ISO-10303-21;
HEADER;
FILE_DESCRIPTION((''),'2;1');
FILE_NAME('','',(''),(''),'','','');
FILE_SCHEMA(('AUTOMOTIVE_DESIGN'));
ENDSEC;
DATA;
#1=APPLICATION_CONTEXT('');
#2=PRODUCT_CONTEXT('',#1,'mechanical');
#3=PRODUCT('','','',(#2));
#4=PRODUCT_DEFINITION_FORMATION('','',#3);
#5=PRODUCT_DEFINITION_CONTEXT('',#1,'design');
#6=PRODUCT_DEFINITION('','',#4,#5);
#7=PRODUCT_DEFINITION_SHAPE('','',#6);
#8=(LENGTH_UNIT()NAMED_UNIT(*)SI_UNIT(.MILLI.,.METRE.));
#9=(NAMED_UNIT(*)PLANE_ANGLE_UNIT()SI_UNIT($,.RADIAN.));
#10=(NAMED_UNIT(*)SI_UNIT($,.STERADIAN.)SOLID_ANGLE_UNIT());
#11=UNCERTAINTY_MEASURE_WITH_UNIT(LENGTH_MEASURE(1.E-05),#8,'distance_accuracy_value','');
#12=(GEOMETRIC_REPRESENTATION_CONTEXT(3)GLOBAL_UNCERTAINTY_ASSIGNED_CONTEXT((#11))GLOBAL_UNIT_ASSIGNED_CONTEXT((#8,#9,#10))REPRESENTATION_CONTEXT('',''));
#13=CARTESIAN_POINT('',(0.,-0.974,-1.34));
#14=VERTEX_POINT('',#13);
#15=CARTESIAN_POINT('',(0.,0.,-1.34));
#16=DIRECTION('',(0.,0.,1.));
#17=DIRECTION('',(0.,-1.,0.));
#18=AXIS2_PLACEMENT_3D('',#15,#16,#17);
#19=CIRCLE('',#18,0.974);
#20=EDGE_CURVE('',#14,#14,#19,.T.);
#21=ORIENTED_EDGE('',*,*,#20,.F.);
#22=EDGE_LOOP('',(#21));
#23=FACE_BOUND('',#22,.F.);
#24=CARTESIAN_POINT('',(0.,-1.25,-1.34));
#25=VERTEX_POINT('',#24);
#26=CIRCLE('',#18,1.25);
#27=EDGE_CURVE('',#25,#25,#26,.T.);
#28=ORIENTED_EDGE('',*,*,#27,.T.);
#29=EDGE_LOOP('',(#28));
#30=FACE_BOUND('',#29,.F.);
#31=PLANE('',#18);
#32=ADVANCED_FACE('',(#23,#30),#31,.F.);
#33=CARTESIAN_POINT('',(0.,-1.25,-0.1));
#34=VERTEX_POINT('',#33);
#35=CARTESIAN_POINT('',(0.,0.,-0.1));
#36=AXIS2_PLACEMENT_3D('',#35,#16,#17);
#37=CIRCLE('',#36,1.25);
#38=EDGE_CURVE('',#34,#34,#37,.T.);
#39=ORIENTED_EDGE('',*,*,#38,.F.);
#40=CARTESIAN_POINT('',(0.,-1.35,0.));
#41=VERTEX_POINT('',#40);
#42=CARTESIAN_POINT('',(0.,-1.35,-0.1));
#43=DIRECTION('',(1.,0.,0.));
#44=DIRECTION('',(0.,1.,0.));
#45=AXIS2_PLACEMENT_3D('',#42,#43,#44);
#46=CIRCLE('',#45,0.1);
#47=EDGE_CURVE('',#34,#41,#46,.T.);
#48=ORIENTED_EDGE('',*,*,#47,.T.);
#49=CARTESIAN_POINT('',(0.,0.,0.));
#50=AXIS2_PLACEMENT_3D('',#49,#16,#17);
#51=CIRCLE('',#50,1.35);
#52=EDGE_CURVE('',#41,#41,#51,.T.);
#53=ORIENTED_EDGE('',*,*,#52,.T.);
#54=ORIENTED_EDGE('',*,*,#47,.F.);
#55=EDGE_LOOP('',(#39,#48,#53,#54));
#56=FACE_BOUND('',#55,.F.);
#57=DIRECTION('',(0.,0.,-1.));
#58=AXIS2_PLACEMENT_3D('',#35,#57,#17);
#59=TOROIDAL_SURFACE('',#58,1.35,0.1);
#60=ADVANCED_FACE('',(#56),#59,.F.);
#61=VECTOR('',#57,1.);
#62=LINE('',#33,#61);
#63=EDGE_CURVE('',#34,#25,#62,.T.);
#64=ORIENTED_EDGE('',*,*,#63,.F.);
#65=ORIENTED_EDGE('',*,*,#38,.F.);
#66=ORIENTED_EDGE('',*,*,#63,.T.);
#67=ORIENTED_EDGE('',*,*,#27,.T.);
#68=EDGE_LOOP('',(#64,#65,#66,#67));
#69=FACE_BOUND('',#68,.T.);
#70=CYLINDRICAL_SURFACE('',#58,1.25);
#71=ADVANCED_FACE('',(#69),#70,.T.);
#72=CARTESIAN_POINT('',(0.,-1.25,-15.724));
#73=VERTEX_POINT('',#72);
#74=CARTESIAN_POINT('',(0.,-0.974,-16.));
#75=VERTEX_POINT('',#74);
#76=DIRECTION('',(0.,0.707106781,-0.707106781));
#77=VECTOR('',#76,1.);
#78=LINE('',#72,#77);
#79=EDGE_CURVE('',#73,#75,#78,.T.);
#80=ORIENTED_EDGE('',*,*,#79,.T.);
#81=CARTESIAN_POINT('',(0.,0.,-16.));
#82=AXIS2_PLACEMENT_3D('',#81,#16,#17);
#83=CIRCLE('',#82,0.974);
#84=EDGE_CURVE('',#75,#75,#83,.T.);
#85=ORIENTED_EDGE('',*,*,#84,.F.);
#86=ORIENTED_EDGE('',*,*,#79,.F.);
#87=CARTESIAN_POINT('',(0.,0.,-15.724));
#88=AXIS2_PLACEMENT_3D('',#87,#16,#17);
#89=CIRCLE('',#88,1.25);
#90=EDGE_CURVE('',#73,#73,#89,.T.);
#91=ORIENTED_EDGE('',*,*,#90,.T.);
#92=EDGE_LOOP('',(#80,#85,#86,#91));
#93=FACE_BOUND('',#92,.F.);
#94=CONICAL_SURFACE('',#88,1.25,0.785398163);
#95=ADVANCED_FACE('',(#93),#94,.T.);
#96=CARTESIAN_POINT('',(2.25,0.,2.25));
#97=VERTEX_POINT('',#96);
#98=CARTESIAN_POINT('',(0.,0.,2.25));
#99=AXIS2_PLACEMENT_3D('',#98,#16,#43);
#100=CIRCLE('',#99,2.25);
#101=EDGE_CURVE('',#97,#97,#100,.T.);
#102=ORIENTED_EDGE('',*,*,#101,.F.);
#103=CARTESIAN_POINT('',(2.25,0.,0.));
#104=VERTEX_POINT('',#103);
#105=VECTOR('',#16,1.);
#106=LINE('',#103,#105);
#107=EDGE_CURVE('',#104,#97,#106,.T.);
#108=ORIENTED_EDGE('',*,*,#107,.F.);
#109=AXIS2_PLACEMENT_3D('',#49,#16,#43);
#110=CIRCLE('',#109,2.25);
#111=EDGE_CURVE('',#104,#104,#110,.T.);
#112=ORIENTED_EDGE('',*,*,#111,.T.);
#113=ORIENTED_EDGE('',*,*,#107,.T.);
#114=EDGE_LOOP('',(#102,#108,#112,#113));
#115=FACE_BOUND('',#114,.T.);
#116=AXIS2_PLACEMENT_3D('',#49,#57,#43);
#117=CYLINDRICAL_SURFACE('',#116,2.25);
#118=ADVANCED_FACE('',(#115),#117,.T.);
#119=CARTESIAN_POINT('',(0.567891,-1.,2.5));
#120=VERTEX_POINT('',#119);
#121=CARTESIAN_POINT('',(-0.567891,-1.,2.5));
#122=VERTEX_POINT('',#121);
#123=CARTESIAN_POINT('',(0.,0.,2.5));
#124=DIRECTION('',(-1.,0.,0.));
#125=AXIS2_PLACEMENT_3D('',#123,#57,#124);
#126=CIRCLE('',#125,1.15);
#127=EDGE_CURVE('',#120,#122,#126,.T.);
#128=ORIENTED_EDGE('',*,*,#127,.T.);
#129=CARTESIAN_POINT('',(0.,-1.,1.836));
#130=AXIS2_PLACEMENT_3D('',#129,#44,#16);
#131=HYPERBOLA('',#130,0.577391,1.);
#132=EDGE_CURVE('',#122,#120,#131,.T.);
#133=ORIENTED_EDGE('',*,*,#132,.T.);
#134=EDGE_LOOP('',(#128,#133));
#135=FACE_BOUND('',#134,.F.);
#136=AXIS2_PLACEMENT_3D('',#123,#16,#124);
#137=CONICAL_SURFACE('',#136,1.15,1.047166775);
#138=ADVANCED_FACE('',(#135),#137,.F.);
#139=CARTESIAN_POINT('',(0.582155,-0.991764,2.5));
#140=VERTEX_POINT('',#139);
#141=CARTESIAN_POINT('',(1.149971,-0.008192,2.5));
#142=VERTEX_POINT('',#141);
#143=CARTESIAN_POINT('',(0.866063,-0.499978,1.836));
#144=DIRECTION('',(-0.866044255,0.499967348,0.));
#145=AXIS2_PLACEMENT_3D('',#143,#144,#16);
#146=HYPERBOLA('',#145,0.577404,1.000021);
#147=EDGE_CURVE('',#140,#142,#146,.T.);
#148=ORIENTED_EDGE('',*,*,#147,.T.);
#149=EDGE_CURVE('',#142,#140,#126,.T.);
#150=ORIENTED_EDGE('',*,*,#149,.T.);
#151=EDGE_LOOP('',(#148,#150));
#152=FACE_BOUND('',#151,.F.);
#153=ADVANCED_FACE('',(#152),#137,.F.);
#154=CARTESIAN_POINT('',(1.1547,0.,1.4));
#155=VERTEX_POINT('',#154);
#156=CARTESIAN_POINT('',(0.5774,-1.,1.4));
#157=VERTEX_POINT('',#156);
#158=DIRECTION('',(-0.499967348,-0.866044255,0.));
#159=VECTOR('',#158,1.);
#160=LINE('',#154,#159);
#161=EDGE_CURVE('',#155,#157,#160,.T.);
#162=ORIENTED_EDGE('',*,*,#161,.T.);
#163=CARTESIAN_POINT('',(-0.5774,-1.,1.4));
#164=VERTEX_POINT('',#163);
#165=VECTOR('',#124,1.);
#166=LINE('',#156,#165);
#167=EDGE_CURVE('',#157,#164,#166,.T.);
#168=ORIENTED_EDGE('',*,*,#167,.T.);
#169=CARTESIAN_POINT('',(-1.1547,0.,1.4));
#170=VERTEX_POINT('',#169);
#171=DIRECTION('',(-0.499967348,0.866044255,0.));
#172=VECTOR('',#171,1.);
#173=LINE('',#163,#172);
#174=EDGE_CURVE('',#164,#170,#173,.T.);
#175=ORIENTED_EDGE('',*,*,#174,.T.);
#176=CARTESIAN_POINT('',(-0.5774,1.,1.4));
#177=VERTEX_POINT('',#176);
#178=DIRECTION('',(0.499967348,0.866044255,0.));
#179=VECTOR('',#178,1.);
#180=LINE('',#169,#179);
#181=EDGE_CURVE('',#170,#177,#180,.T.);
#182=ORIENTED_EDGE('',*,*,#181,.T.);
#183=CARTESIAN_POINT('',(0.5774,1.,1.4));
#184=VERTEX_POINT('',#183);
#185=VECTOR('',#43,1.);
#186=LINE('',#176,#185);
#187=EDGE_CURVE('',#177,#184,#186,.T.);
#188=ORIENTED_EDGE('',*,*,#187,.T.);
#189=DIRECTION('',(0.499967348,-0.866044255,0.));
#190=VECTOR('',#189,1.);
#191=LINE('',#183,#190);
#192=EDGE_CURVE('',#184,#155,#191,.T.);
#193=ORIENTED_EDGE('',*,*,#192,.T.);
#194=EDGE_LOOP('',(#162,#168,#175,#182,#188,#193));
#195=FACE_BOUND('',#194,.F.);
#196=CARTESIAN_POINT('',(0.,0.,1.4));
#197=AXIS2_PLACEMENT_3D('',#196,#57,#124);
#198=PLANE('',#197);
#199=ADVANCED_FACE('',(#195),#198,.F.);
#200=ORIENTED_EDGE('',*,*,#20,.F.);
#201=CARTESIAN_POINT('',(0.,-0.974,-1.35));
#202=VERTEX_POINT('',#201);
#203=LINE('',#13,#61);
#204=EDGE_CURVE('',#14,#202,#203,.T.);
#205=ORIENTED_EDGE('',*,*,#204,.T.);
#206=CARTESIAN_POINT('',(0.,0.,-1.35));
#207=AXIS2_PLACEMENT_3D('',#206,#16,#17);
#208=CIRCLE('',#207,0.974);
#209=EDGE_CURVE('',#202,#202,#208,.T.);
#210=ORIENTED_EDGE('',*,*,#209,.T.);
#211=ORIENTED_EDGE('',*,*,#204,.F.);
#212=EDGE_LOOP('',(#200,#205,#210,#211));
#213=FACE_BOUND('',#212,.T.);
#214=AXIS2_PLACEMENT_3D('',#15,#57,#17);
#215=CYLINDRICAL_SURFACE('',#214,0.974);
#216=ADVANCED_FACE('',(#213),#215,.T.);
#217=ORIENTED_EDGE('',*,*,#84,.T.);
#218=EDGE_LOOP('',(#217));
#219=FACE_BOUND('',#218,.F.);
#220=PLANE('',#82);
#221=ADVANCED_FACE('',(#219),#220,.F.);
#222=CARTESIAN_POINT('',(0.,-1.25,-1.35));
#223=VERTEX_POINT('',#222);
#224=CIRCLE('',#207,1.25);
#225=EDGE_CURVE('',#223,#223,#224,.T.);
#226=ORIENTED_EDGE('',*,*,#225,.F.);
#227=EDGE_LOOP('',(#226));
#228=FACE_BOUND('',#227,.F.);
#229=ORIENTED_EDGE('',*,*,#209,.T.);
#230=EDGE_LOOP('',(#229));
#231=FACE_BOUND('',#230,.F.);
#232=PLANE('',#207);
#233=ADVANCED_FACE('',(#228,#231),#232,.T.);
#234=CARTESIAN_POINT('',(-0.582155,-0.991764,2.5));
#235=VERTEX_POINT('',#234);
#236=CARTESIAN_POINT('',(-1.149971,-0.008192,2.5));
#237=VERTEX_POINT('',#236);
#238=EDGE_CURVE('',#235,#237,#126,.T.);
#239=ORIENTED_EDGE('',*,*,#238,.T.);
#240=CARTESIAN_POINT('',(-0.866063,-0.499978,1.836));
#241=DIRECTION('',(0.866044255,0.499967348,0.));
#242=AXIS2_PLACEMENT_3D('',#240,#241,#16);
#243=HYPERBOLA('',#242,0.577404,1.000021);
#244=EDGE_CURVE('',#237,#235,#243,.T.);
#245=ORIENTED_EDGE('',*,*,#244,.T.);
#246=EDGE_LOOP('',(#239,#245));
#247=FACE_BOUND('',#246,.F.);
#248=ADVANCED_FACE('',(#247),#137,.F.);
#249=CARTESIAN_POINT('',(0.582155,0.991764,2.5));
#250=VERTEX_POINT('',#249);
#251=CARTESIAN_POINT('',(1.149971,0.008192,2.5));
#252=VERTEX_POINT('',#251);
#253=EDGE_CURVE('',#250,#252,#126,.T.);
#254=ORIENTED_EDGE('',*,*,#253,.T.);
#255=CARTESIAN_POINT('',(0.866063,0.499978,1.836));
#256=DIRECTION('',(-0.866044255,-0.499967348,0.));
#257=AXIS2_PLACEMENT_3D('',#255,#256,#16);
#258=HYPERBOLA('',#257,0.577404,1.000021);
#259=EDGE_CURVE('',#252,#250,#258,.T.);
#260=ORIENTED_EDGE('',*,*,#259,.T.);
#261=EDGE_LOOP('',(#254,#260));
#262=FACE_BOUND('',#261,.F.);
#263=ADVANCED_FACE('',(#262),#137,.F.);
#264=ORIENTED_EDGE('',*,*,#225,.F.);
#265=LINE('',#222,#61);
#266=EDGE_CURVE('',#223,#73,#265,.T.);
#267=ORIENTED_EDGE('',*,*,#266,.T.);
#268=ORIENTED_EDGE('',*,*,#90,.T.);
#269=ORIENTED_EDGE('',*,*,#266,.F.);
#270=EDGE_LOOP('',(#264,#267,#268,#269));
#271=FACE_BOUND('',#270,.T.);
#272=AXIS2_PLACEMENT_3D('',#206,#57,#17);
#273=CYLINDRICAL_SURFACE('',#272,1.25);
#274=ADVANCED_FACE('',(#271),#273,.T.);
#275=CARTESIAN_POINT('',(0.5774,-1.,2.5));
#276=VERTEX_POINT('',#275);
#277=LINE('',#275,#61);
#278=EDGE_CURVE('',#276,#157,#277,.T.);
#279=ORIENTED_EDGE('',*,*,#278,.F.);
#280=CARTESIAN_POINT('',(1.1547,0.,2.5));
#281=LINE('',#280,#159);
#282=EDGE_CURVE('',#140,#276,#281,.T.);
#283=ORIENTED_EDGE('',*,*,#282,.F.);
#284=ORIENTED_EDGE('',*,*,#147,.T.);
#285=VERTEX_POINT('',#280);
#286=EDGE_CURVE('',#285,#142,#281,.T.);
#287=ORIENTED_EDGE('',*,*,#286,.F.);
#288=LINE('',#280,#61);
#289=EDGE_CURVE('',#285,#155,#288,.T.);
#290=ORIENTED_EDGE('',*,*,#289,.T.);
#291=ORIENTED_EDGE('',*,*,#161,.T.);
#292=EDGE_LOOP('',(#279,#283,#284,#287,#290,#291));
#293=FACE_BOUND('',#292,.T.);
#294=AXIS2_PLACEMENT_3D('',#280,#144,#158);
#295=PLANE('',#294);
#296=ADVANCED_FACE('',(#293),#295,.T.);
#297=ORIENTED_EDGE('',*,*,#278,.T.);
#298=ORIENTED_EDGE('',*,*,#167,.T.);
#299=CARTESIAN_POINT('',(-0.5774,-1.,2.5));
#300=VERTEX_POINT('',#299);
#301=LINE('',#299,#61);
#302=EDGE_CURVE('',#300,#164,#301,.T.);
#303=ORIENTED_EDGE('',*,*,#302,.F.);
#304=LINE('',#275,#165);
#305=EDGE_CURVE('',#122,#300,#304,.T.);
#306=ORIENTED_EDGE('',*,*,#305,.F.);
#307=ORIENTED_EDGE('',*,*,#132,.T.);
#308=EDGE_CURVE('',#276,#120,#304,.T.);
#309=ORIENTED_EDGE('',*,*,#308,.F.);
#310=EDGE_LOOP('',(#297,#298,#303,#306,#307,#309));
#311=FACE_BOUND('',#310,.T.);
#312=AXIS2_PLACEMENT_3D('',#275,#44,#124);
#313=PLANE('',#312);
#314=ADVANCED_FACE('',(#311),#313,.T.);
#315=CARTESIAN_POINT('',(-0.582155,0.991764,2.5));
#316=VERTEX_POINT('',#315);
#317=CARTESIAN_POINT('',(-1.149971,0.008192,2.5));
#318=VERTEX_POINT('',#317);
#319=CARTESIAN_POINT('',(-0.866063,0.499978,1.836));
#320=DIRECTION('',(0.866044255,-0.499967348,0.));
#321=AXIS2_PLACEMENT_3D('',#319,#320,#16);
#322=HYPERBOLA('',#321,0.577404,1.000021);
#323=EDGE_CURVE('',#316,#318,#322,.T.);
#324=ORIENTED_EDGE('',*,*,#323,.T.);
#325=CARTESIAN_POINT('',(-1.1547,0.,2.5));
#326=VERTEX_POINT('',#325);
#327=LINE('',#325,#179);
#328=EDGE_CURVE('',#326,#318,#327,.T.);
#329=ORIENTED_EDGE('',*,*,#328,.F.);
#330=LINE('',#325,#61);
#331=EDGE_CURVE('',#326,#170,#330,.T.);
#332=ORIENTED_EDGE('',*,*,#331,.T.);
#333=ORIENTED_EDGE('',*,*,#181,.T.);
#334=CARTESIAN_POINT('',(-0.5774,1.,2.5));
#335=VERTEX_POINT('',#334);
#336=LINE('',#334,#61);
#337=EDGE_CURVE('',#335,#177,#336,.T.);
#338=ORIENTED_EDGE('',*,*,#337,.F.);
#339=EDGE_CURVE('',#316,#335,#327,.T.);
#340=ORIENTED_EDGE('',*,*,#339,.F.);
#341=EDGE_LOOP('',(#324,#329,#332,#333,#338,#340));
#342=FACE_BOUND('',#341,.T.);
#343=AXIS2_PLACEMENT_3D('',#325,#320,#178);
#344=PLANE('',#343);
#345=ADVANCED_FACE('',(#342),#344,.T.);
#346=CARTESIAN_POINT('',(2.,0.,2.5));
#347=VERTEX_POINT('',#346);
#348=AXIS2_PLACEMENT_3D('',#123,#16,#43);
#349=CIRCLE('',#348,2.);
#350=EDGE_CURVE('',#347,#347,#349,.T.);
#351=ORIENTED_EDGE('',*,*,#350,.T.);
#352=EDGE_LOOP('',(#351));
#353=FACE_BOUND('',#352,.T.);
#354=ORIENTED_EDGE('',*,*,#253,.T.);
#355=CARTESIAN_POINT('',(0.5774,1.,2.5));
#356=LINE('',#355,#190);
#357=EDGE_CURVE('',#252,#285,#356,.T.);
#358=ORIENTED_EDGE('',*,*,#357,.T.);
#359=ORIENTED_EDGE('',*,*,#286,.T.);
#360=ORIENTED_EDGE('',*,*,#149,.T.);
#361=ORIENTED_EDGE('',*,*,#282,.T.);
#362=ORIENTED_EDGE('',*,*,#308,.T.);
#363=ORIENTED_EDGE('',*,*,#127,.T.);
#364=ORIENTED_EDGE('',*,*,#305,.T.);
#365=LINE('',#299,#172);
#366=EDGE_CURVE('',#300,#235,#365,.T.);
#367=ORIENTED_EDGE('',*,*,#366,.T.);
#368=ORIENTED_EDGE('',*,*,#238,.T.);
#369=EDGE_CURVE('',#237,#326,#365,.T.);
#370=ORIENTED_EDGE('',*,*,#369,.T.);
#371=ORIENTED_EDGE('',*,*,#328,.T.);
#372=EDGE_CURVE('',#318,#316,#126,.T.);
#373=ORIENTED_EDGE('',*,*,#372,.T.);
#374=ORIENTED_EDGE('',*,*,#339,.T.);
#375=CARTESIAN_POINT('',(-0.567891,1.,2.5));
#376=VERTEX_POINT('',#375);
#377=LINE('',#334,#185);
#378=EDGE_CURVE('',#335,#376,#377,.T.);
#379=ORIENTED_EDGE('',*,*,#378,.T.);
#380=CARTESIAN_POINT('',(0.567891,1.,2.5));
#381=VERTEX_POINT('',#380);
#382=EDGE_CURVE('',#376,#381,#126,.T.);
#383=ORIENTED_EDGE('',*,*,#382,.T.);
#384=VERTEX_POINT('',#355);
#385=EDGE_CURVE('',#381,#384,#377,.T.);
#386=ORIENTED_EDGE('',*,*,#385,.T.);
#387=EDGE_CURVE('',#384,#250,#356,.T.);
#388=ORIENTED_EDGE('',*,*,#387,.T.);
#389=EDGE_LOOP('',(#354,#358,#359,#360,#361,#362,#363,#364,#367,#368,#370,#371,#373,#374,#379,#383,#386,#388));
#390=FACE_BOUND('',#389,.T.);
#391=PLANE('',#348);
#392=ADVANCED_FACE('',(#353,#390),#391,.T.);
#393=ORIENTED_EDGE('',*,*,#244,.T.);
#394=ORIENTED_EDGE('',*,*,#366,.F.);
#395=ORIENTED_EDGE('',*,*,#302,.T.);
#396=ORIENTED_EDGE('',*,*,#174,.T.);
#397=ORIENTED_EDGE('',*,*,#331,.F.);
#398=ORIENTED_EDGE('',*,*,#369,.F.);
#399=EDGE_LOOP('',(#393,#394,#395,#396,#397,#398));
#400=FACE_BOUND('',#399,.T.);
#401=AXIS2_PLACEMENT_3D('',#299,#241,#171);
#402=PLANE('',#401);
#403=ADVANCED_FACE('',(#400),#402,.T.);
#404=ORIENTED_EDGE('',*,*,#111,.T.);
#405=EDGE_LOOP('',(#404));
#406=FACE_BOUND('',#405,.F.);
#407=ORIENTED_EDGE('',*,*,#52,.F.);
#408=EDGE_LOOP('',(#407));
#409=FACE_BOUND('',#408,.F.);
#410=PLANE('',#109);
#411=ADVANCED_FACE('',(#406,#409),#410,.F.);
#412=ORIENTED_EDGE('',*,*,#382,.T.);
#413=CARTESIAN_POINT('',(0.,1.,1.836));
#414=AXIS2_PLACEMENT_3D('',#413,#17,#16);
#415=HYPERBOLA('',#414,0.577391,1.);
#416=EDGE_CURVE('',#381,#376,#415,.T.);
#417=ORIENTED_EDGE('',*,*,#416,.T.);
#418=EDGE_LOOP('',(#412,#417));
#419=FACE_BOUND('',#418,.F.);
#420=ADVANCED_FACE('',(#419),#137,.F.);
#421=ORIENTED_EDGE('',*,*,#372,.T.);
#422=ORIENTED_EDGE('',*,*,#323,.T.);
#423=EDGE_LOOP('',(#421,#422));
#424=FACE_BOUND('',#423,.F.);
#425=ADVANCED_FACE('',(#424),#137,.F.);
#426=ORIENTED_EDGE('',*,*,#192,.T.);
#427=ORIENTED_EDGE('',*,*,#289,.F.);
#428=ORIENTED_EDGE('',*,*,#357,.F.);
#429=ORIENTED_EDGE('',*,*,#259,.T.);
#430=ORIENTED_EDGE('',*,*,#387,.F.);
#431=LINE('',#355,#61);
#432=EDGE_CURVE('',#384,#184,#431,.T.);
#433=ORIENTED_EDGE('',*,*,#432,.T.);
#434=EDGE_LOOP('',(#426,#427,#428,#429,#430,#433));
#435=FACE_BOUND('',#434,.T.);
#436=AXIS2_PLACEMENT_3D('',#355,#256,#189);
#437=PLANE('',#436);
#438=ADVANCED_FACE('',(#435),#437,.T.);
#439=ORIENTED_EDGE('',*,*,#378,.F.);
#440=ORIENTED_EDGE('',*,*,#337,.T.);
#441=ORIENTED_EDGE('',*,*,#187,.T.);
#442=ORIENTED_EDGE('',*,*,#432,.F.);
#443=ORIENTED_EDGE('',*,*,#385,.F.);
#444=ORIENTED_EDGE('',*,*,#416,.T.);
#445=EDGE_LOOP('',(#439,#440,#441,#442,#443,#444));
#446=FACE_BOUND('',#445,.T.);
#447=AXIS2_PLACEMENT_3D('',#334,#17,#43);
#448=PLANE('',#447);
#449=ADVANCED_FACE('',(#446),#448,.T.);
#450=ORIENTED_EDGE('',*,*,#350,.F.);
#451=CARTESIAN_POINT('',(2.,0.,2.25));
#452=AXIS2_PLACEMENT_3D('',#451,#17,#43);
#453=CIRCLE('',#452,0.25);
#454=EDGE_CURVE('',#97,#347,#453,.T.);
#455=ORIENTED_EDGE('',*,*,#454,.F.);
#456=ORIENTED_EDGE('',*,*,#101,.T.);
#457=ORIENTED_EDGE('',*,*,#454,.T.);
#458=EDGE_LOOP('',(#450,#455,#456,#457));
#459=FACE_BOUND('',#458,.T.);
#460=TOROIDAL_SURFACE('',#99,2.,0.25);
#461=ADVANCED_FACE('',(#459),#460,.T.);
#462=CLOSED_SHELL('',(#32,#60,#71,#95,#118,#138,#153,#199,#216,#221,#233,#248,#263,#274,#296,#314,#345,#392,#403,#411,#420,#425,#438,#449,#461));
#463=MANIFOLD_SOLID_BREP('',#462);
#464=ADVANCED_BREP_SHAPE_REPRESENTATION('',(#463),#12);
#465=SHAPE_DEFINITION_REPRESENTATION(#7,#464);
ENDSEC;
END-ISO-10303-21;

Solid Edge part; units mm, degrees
sketch "Sketch1" plane through (0, 0, 0) normal (0, 0, 1) x (1, 0, 0)
  circle A0 centre (0, 0) radius 2.25
extrude "Protrusion1" add sketch "Sketch1" along normal blind 2.5
sketch "Sketch2" plane through (0, 0, 2.5) normal (0, 0, 1) x (0, 1, 0)
  line L0 (0, 1.1547) -> (1, 0.5774)
  line L1 (1, 0.5774) -> (1, -0.5774)
  line L2 (1, -0.5774) -> (0, -1.1547)
  line L3 (0, -1.1547) -> (-1, -0.5774)
  line L4 (-1, -0.5774) -> (-1, 0.5774)
  line L5 (-1, 0.5774) -> (0, 1.1547)
extrude "Cutout1" cut sketch "Sketch2" against normal blind 1.1
fillet "Round1" radius 0.25 1 edges at (-2.25, 0, 2.5)
sketch "Sketch3" plane through (0, 0, 0) normal (1, 0, 0) x (0, 1, 0)
  line L0 (-0.974, -16) -> (0, -16)
  line L1 (-1.25, -15.724) -> (-0.974, -16)
  line L2 (-1.25, -1.35) -> (-1.25, -15.724)
  line L3 (-0.974, -1.35) -> (-1.25, -1.35)
  line L4 (-0.974, -1.34) -> (-0.974, -1.35)
  line L5 (-1.25, -1.34) -> (-0.974, -1.34)
  line L6 (-1.25, -0.1) -> (-1.25, -1.34)
  arc A0 (-1.25, -0.1) -> (-1.35, 0) centre (-1.35, -0.1) ccw
  dimension "D1" = 1.35
  dimension "D2" = 0.01
  dimension "D3" = 0.1
  dimension "D4" = 16
revolve "RevolvedProtrusion1" add sketch "Sketch3" angle 360 about axis through (0, 0, -60.325) along (0, 0, 1) material side at (0, -0.487, -15.95)
cosmetic_thread "Thread1" size "M2.5"
sketch "Sketch4" plane through (0, 0, 0) normal (0, -1, 0) x (1, 0, 0)
  line L0 (-1.15, 2.5) -> (0, 1.836)
revolve "RevolvedCutout1" cut sketch "Sketch4" angle 360 about axis through (0, 0, 57.15) along (0, 0, -1) material side at (-0.55, 0, 2.2113)
properties material "Stahl"
